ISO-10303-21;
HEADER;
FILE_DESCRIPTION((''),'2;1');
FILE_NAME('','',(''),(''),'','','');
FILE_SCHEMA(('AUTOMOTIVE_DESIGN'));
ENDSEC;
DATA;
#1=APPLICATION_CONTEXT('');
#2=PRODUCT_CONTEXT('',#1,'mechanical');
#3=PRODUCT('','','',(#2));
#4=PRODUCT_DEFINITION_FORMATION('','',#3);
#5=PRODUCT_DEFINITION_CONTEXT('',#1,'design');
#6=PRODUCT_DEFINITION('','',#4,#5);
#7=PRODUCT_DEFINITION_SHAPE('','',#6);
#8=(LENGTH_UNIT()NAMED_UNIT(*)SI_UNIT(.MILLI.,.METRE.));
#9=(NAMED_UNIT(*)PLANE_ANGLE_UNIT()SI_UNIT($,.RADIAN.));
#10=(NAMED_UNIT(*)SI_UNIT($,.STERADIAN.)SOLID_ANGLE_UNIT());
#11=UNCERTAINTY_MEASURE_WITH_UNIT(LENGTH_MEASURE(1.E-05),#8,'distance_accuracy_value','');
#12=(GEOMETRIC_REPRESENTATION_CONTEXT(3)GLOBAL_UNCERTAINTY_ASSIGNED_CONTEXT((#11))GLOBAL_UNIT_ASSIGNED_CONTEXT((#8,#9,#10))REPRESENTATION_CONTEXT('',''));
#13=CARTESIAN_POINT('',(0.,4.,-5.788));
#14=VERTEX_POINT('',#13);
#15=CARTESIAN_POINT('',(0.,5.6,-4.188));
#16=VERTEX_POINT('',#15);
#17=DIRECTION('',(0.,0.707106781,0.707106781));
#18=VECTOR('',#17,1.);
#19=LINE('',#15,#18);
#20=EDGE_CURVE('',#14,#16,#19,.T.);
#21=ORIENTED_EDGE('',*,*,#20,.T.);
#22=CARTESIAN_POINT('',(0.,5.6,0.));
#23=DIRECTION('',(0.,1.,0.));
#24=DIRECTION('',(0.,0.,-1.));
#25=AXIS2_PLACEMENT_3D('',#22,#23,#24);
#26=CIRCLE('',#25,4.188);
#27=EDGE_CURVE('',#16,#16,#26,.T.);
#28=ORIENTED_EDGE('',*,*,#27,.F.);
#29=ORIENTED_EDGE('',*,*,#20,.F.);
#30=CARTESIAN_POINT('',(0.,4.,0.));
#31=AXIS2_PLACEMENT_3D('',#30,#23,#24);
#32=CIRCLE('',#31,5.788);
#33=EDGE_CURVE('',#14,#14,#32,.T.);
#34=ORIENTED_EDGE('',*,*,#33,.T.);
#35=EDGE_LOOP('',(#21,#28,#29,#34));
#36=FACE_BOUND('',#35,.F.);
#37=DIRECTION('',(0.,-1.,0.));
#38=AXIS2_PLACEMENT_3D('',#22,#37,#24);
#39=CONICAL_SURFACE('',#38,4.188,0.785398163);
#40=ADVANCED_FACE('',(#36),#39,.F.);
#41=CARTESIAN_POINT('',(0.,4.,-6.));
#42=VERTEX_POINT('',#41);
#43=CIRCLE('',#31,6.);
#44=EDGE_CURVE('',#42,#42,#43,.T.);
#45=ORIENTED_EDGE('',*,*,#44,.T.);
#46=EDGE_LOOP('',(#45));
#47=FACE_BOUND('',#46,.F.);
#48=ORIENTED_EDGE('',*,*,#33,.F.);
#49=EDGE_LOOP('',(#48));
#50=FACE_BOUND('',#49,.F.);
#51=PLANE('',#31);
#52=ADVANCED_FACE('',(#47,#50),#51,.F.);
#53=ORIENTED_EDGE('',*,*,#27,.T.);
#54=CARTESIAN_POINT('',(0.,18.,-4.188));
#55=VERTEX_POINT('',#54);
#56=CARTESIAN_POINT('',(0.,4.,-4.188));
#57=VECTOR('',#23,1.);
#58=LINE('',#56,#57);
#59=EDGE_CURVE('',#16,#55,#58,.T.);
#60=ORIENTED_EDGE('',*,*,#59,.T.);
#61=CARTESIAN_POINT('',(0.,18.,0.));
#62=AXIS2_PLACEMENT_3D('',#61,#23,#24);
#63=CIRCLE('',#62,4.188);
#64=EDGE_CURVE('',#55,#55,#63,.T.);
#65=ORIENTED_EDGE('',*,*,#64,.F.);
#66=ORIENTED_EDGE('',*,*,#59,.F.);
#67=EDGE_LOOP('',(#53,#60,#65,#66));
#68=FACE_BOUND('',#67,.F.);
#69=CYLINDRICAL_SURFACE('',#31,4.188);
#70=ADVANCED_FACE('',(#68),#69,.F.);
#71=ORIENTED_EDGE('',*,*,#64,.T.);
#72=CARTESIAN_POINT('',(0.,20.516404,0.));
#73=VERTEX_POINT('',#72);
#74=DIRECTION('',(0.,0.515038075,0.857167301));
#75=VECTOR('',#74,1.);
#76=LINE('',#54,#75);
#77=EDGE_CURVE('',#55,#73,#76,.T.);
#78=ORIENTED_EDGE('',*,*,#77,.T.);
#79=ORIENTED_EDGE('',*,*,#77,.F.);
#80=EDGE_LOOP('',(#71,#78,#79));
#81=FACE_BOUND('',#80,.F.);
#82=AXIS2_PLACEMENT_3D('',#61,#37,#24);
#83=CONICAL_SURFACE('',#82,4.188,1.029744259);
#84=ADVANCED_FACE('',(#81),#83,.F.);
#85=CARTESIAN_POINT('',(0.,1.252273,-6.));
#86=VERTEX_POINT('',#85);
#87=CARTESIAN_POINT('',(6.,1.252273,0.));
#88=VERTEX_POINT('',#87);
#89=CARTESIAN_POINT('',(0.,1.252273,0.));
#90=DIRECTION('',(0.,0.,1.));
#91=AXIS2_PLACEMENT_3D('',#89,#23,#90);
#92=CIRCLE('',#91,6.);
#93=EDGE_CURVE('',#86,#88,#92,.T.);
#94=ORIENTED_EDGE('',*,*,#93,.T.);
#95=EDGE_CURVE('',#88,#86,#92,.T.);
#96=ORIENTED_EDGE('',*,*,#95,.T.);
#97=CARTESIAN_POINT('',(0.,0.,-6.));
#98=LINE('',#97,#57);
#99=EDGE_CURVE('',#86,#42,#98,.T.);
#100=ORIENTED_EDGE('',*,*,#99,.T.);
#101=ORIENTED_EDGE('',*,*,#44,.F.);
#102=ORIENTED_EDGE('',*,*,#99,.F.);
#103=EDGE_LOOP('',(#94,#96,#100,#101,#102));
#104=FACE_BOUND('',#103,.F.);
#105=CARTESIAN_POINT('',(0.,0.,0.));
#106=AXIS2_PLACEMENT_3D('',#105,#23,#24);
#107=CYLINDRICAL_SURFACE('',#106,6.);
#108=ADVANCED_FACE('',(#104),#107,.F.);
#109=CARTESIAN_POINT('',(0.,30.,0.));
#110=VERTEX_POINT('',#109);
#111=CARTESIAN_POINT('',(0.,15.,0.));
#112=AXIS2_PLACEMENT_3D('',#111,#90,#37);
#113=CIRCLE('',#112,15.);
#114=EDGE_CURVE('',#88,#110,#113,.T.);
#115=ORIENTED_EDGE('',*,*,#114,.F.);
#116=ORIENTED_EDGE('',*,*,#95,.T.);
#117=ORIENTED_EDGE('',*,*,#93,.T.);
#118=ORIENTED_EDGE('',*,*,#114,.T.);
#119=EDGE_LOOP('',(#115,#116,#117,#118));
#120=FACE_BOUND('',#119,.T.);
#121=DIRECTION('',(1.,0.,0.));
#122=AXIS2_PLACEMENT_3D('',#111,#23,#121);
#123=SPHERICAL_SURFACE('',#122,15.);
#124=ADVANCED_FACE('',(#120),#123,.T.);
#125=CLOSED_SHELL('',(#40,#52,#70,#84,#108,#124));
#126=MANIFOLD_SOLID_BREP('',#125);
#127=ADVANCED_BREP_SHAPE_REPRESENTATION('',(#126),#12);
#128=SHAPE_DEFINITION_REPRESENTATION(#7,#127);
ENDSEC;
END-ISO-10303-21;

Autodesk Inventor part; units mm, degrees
ref_plane "YZ Plane" through (0, 0, 0) normal (1, 0, 0) x (0, 1, 0)
ref_plane "XZ Plane" through (0, 0, 0) normal (0, 1, 0) x (-1, 0, 0)
ref_plane "XY Plane" through (0, 0, 0) normal (0, 0, 1) x (1, 0, 0)
sketch "Эскиз1" plane through (0, 0, 0) normal (0, 0, 1) x (1, 0, 0)
  arc A0 (0, 0) -> (0, 30) centre (0, 15) ccw
  line L0 (0, 0) -> (0, 30)
  dimension "d0" = 30
revolve "Вращение1" add sketch "Эскиз1" angle 360 about axis through (0, 0, 0) along (0, 1, 0)
sketch "Эскиз2" plane through (0, 0, 0) normal (0, 1, 0) x (-1, 0, 0)
  point P0 (0, 0)
  point P1 (0, 0)
hole "Отверстие1" at (0, 0, 0) direction (0, 1, 0) diameter 8.376 depth 18 tip angle 118 counterbore diameter 12 counterbore depth 4 thread size "M10x1.5" class "6H" standard "ISO Metric profile"
chamfer "Фаска1" distance 1.6 angle 45 1 edges at (0, 4, 4.188)
properties part number "Ручка"
